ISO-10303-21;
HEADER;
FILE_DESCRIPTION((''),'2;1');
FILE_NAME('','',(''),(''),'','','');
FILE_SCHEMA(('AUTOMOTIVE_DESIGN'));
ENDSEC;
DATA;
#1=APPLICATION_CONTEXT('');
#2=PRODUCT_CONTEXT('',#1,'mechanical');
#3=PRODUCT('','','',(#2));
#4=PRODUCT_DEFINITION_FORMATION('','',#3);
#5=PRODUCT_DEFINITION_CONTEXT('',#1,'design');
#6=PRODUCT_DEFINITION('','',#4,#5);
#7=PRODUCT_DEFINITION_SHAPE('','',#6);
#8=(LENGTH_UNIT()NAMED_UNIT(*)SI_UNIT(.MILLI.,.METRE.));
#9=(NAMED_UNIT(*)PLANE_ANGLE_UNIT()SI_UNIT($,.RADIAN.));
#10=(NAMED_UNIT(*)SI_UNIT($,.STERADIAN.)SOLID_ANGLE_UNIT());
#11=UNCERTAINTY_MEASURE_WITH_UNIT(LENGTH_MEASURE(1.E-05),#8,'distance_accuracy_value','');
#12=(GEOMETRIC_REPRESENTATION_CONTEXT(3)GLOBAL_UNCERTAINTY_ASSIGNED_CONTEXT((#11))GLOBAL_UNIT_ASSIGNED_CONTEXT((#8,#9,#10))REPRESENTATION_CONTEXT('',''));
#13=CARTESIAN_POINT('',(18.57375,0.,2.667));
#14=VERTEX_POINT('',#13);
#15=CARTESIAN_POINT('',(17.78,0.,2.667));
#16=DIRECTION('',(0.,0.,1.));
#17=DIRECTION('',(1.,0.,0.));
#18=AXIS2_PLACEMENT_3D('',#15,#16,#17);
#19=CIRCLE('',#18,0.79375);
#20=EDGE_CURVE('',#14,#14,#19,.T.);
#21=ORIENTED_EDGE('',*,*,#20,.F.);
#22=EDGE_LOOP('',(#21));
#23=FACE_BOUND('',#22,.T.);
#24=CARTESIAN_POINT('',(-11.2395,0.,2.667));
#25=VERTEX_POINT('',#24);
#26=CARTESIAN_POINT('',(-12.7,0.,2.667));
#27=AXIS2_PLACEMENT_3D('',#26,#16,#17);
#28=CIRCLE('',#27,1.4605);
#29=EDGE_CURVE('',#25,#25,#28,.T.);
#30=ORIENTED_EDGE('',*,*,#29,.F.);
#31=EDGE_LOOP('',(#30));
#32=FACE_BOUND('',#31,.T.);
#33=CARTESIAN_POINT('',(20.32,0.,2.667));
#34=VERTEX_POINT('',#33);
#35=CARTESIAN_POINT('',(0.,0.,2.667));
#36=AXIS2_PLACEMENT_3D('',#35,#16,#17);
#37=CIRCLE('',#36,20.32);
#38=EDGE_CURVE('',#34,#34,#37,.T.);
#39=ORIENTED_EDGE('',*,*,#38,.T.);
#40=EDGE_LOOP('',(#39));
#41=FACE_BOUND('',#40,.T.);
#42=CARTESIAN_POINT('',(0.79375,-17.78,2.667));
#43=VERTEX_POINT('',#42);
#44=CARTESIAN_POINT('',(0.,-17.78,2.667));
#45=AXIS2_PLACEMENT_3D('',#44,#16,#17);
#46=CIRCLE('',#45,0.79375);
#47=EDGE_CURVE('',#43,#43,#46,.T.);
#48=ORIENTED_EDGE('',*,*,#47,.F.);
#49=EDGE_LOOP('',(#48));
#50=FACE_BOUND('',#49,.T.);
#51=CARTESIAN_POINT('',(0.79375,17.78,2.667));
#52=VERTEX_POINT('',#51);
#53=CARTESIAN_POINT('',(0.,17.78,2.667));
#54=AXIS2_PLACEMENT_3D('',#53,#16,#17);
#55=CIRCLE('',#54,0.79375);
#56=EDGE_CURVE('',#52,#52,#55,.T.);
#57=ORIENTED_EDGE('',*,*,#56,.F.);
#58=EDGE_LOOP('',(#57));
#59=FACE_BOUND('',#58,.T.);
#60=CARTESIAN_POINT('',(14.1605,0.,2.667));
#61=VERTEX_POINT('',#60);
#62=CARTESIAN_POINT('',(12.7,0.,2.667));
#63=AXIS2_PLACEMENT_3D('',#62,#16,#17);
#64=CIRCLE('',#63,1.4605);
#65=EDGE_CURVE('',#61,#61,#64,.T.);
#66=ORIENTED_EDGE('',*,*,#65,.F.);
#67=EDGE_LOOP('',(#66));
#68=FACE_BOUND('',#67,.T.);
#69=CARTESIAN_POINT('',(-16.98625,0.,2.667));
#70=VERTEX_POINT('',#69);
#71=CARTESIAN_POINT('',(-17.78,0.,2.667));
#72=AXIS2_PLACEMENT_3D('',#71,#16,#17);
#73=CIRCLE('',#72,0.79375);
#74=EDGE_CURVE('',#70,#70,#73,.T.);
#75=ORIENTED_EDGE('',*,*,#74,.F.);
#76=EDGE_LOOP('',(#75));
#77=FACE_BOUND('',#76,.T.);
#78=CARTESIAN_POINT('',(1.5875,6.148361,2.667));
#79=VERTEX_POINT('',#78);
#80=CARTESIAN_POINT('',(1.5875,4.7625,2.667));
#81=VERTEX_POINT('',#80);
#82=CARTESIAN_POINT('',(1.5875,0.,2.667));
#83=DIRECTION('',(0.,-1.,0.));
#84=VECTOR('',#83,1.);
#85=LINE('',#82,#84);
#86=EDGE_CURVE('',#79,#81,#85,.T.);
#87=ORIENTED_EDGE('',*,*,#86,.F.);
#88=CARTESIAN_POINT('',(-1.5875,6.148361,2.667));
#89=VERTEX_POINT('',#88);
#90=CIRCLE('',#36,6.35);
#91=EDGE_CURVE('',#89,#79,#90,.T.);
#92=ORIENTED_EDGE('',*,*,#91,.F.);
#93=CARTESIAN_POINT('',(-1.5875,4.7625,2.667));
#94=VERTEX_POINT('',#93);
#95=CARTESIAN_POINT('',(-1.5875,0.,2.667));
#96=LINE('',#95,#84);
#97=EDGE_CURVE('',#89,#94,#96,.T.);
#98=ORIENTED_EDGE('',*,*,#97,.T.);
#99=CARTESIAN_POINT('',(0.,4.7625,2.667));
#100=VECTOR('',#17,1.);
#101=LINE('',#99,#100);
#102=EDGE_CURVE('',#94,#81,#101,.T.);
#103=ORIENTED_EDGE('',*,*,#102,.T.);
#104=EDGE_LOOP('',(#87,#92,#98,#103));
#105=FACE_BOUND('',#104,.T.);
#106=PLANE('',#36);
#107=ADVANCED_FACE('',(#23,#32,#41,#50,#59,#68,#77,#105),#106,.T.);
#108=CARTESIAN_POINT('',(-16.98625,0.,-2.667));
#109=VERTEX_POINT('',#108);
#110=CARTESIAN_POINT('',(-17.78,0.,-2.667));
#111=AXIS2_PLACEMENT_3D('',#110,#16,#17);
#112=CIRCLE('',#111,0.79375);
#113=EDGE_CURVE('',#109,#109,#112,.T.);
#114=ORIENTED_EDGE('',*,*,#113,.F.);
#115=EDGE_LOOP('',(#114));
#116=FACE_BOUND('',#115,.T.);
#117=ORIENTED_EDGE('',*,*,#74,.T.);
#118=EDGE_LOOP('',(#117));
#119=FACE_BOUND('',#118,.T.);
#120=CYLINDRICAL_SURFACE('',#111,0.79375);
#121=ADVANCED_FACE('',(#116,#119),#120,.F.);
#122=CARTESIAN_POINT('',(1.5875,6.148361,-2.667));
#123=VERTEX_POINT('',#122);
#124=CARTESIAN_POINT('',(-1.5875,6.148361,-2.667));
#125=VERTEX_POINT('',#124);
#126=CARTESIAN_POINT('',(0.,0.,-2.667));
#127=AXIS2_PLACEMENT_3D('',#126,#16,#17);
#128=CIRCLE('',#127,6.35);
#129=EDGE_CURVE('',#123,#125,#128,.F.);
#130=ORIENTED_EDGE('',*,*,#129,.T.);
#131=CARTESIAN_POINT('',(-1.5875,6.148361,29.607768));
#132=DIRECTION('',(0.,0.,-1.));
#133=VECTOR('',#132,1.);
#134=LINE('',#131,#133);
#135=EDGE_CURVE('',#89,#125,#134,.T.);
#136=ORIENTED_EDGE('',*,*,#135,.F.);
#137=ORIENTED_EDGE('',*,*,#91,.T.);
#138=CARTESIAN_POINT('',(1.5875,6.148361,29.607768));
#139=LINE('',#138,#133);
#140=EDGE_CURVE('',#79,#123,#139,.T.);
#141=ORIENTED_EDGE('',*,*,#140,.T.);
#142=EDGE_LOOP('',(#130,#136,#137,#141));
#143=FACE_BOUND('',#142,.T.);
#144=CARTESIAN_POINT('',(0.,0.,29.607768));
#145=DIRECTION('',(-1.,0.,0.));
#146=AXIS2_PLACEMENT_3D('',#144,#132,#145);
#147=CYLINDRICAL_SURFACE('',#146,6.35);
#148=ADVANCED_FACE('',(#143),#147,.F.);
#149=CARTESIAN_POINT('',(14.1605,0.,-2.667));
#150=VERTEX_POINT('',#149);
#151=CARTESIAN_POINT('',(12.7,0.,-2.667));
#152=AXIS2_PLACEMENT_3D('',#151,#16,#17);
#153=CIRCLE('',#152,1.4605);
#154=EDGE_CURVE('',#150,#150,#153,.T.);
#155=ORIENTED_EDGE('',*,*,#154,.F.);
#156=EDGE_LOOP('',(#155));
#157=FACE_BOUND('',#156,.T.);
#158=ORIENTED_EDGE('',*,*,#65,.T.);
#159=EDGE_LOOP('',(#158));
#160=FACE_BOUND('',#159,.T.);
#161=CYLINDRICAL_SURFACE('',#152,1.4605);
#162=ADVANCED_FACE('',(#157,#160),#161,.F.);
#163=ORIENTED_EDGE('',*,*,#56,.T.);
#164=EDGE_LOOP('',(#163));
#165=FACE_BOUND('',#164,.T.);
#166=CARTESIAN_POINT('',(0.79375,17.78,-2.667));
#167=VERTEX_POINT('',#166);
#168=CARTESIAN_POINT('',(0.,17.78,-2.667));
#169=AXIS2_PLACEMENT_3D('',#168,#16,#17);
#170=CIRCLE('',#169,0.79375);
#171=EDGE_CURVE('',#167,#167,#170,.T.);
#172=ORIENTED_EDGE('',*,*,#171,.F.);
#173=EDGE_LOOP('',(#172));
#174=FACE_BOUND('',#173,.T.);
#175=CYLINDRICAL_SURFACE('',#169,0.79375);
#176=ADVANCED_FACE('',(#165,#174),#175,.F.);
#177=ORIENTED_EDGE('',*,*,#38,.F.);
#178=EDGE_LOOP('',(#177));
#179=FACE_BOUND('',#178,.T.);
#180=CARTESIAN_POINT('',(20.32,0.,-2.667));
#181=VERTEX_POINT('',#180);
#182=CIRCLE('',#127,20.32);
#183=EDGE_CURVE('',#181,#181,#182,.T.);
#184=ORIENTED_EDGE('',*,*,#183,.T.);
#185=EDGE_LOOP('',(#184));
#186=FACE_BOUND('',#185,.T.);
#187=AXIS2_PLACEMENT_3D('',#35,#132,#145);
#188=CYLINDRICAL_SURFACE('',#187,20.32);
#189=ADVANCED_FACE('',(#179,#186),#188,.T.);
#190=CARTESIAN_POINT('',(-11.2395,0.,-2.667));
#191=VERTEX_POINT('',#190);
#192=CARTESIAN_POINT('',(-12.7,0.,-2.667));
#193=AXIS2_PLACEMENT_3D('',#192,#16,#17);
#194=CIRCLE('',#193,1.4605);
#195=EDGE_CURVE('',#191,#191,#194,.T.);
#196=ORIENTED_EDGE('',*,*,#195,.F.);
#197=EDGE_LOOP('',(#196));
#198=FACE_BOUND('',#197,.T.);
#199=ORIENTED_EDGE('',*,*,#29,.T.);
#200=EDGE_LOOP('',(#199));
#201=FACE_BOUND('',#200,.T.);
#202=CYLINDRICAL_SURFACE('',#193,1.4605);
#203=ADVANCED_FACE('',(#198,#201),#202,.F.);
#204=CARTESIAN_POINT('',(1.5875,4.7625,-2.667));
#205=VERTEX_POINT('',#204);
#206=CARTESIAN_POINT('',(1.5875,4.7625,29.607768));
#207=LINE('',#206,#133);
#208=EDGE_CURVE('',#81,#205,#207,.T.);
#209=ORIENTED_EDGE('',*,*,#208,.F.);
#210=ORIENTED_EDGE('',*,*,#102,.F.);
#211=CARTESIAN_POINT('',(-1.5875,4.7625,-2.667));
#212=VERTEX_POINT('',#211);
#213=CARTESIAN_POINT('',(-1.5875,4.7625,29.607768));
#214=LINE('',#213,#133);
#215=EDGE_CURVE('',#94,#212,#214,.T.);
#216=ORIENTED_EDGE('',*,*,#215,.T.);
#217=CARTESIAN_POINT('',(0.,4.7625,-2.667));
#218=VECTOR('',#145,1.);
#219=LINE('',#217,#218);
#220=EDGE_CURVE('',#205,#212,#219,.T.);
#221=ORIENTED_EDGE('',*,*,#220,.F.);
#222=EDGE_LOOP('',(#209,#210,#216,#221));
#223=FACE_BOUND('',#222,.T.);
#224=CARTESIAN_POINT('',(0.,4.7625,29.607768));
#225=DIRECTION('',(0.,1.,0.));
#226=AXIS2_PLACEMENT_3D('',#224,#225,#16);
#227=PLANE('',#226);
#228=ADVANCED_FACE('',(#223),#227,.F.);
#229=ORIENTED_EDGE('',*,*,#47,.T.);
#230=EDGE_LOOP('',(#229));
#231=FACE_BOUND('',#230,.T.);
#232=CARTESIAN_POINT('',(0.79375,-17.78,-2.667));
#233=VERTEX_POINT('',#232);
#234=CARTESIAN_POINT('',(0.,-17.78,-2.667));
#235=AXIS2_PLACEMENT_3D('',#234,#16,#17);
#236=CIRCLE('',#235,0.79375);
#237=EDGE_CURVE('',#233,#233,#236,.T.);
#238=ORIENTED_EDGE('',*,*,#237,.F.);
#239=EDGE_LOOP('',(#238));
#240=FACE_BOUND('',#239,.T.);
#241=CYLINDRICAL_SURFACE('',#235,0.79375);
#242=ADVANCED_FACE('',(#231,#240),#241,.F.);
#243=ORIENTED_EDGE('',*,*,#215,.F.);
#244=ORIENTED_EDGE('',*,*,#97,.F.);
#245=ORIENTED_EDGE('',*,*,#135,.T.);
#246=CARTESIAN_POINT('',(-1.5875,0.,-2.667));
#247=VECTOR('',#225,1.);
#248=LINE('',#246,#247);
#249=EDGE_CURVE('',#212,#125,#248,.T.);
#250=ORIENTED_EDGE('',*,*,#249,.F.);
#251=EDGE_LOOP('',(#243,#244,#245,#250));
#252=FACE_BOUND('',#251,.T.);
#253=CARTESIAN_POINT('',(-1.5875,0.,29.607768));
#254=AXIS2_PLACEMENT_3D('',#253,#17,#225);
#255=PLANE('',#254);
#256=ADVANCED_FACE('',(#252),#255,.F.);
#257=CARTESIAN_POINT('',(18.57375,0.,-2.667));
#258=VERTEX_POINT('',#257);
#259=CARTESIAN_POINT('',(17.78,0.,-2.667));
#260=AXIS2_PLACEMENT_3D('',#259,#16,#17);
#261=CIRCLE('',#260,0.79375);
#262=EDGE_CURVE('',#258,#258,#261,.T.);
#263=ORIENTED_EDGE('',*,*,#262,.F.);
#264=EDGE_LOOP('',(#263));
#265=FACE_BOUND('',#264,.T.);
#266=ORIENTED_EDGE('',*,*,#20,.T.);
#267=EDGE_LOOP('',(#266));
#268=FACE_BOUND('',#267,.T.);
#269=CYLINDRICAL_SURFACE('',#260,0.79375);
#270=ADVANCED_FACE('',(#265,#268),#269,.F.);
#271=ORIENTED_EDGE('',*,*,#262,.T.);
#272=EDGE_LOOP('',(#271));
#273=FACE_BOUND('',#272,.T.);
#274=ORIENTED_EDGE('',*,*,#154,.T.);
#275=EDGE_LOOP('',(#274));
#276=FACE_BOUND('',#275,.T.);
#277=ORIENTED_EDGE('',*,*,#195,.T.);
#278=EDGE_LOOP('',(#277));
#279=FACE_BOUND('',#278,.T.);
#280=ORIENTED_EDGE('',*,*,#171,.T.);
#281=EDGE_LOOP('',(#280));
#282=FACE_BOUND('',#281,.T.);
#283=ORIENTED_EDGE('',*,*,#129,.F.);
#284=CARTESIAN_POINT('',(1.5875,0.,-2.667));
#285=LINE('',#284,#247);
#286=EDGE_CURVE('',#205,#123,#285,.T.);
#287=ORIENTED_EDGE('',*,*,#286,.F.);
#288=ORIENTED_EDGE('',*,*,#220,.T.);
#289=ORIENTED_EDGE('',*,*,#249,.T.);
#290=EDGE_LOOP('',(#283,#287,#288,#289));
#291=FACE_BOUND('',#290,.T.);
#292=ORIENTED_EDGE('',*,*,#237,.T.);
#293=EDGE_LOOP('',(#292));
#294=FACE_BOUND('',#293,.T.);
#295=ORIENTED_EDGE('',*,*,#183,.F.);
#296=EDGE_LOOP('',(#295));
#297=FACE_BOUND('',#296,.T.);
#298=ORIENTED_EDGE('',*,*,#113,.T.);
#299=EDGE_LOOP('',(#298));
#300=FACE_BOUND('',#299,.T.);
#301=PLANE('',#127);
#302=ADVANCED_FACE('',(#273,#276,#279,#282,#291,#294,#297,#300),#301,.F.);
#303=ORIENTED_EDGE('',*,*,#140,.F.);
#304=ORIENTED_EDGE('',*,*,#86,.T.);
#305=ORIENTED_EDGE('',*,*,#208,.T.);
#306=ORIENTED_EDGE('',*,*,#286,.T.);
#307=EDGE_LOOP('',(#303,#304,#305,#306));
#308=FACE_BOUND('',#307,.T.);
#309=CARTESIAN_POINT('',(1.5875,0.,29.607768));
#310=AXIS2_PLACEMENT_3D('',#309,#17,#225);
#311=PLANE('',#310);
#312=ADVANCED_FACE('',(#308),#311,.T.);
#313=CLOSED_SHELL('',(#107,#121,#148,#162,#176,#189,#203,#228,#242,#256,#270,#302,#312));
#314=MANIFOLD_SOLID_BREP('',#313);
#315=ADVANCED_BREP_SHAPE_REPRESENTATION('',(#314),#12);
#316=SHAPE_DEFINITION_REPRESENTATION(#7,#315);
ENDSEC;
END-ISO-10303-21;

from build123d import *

# Parameters (mm, degrees)
SKETCH1_R                       = 20.32
SKETCH1_R_2                     = 9.144
BOSS_EXTRUDE1_DEPTH             = 2.667
SKETCH2_R                       = 1.4605
CUT_EXTRUDE1_DEPTH              = 30.227664224
BOSS_EXTRUDE2_REACH             = 30.86
SKETCH3_R                       = 9.525
BOSS_EXTRUDE2_DIRECTION_2_REACH = 30.86
SKETCH4_R                       = 0.79375
CUT_EXTRUDE2_DEPTH              = 30.227664224


with BuildPart() as part:
    # Sketch1 → Boss-Extrude1 (new, symmetric)
    with BuildSketch(Plane.XY):
        Circle(SKETCH1_R)
        Circle(SKETCH1_R_2, mode=Mode.SUBTRACT)
    extrude(amount=BOSS_EXTRUDE1_DEPTH, both=True)

    # Sketch2 → Cut-Extrude1 (cut, through all)
    with BuildSketch(Plane.XY.offset(2.667)):
        with Locations((12.7, 0)):
            Circle(SKETCH2_R)
        with Locations((-12.7, 0)):
            Circle(SKETCH2_R)
    extrude(amount=-CUT_EXTRUDE1_DEPTH, mode=Mode.SUBTRACT)

    # Boss-Extrude2: up to this face of the body (flat: up to its plane)
    boss_extrude2_end = Plane(part.part.faces().sort_by_distance((-19.745263608, 0, 2.667))[0])
    # Sketch3 → Boss-Extrude2 (add, up to the picked face)
    with BuildSketch(Plane.XY, mode=Mode.PRIVATE) as boss_extrude2_sk1:
        Circle(SKETCH3_R)
        with BuildLine():
            Line((-1.5875, 6.148361062), (-1.5875, 4.7625))
            Line((-1.5875, 4.7625), (1.5875, 4.7625))
            Line((1.5875, 4.7625), (1.5875, 6.148361062))
            ThreePointArc((1.5875, 6.148361062), (0, -6.35), (-1.5875, 6.148361062))
        make_face(mode=Mode.SUBTRACT)
    boss_extrude2_tool1 = split(extrude(boss_extrude2_sk1.sketch, amount=BOSS_EXTRUDE2_REACH, mode=Mode.PRIVATE), bisect_by=boss_extrude2_end, keep=Keep.BOTH, mode=Mode.PRIVATE)
    add(boss_extrude2_tool1.solids().sort_by(Axis((-9.255592, 0, 0), (0, 0, 1)))[0])

    # Boss-Extrude2 direction 2: up to this face of the body (flat: up to its plane)
    boss_extrude2_direction_2_end = Plane(part.part.faces().sort_by_distance((-19.745263608, 0, -2.667))[0])
    # Sketch3 → Boss-Extrude2 direction 2 (add, up to the picked face)
    with BuildSketch(Plane.XY, mode=Mode.PRIVATE) as boss_extrude2_direction_2_sk1:
        Circle(SKETCH3_R)
        with BuildLine():
            Line((-1.5875, 6.148361062), (-1.5875, 4.7625))
            Line((-1.5875, 4.7625), (1.5875, 4.7625))
            Line((1.5875, 4.7625), (1.5875, 6.148361062))
            ThreePointArc((1.5875, 6.148361062), (0, -6.35), (-1.5875, 6.148361062))
        make_face(mode=Mode.SUBTRACT)
    boss_extrude2_direction_2_tool1 = split(extrude(boss_extrude2_direction_2_sk1.sketch, amount=-BOSS_EXTRUDE2_DIRECTION_2_REACH, mode=Mode.PRIVATE), bisect_by=boss_extrude2_direction_2_end, keep=Keep.BOTH, mode=Mode.PRIVATE)
    add(boss_extrude2_direction_2_tool1.solids().sort_by(Axis((-9.255592, 0, 0), (0, 0, -1)))[0])

    # Sketch4 → Cut-Extrude2 (cut, through all)
    with BuildSketch(Plane.XY.offset(2.667)):
        with Locations((0, 17.78)):
            Circle(SKETCH4_R)
        with Locations((17.78, 0)):
            Circle(SKETCH4_R)
        with Locations((0, -17.78)):
            Circle(SKETCH4_R)
        with Locations((-17.78, 0)):
            Circle(SKETCH4_R)
    extrude(amount=-CUT_EXTRUDE2_DEPTH, mode=Mode.SUBTRACT)


solid = part.part
